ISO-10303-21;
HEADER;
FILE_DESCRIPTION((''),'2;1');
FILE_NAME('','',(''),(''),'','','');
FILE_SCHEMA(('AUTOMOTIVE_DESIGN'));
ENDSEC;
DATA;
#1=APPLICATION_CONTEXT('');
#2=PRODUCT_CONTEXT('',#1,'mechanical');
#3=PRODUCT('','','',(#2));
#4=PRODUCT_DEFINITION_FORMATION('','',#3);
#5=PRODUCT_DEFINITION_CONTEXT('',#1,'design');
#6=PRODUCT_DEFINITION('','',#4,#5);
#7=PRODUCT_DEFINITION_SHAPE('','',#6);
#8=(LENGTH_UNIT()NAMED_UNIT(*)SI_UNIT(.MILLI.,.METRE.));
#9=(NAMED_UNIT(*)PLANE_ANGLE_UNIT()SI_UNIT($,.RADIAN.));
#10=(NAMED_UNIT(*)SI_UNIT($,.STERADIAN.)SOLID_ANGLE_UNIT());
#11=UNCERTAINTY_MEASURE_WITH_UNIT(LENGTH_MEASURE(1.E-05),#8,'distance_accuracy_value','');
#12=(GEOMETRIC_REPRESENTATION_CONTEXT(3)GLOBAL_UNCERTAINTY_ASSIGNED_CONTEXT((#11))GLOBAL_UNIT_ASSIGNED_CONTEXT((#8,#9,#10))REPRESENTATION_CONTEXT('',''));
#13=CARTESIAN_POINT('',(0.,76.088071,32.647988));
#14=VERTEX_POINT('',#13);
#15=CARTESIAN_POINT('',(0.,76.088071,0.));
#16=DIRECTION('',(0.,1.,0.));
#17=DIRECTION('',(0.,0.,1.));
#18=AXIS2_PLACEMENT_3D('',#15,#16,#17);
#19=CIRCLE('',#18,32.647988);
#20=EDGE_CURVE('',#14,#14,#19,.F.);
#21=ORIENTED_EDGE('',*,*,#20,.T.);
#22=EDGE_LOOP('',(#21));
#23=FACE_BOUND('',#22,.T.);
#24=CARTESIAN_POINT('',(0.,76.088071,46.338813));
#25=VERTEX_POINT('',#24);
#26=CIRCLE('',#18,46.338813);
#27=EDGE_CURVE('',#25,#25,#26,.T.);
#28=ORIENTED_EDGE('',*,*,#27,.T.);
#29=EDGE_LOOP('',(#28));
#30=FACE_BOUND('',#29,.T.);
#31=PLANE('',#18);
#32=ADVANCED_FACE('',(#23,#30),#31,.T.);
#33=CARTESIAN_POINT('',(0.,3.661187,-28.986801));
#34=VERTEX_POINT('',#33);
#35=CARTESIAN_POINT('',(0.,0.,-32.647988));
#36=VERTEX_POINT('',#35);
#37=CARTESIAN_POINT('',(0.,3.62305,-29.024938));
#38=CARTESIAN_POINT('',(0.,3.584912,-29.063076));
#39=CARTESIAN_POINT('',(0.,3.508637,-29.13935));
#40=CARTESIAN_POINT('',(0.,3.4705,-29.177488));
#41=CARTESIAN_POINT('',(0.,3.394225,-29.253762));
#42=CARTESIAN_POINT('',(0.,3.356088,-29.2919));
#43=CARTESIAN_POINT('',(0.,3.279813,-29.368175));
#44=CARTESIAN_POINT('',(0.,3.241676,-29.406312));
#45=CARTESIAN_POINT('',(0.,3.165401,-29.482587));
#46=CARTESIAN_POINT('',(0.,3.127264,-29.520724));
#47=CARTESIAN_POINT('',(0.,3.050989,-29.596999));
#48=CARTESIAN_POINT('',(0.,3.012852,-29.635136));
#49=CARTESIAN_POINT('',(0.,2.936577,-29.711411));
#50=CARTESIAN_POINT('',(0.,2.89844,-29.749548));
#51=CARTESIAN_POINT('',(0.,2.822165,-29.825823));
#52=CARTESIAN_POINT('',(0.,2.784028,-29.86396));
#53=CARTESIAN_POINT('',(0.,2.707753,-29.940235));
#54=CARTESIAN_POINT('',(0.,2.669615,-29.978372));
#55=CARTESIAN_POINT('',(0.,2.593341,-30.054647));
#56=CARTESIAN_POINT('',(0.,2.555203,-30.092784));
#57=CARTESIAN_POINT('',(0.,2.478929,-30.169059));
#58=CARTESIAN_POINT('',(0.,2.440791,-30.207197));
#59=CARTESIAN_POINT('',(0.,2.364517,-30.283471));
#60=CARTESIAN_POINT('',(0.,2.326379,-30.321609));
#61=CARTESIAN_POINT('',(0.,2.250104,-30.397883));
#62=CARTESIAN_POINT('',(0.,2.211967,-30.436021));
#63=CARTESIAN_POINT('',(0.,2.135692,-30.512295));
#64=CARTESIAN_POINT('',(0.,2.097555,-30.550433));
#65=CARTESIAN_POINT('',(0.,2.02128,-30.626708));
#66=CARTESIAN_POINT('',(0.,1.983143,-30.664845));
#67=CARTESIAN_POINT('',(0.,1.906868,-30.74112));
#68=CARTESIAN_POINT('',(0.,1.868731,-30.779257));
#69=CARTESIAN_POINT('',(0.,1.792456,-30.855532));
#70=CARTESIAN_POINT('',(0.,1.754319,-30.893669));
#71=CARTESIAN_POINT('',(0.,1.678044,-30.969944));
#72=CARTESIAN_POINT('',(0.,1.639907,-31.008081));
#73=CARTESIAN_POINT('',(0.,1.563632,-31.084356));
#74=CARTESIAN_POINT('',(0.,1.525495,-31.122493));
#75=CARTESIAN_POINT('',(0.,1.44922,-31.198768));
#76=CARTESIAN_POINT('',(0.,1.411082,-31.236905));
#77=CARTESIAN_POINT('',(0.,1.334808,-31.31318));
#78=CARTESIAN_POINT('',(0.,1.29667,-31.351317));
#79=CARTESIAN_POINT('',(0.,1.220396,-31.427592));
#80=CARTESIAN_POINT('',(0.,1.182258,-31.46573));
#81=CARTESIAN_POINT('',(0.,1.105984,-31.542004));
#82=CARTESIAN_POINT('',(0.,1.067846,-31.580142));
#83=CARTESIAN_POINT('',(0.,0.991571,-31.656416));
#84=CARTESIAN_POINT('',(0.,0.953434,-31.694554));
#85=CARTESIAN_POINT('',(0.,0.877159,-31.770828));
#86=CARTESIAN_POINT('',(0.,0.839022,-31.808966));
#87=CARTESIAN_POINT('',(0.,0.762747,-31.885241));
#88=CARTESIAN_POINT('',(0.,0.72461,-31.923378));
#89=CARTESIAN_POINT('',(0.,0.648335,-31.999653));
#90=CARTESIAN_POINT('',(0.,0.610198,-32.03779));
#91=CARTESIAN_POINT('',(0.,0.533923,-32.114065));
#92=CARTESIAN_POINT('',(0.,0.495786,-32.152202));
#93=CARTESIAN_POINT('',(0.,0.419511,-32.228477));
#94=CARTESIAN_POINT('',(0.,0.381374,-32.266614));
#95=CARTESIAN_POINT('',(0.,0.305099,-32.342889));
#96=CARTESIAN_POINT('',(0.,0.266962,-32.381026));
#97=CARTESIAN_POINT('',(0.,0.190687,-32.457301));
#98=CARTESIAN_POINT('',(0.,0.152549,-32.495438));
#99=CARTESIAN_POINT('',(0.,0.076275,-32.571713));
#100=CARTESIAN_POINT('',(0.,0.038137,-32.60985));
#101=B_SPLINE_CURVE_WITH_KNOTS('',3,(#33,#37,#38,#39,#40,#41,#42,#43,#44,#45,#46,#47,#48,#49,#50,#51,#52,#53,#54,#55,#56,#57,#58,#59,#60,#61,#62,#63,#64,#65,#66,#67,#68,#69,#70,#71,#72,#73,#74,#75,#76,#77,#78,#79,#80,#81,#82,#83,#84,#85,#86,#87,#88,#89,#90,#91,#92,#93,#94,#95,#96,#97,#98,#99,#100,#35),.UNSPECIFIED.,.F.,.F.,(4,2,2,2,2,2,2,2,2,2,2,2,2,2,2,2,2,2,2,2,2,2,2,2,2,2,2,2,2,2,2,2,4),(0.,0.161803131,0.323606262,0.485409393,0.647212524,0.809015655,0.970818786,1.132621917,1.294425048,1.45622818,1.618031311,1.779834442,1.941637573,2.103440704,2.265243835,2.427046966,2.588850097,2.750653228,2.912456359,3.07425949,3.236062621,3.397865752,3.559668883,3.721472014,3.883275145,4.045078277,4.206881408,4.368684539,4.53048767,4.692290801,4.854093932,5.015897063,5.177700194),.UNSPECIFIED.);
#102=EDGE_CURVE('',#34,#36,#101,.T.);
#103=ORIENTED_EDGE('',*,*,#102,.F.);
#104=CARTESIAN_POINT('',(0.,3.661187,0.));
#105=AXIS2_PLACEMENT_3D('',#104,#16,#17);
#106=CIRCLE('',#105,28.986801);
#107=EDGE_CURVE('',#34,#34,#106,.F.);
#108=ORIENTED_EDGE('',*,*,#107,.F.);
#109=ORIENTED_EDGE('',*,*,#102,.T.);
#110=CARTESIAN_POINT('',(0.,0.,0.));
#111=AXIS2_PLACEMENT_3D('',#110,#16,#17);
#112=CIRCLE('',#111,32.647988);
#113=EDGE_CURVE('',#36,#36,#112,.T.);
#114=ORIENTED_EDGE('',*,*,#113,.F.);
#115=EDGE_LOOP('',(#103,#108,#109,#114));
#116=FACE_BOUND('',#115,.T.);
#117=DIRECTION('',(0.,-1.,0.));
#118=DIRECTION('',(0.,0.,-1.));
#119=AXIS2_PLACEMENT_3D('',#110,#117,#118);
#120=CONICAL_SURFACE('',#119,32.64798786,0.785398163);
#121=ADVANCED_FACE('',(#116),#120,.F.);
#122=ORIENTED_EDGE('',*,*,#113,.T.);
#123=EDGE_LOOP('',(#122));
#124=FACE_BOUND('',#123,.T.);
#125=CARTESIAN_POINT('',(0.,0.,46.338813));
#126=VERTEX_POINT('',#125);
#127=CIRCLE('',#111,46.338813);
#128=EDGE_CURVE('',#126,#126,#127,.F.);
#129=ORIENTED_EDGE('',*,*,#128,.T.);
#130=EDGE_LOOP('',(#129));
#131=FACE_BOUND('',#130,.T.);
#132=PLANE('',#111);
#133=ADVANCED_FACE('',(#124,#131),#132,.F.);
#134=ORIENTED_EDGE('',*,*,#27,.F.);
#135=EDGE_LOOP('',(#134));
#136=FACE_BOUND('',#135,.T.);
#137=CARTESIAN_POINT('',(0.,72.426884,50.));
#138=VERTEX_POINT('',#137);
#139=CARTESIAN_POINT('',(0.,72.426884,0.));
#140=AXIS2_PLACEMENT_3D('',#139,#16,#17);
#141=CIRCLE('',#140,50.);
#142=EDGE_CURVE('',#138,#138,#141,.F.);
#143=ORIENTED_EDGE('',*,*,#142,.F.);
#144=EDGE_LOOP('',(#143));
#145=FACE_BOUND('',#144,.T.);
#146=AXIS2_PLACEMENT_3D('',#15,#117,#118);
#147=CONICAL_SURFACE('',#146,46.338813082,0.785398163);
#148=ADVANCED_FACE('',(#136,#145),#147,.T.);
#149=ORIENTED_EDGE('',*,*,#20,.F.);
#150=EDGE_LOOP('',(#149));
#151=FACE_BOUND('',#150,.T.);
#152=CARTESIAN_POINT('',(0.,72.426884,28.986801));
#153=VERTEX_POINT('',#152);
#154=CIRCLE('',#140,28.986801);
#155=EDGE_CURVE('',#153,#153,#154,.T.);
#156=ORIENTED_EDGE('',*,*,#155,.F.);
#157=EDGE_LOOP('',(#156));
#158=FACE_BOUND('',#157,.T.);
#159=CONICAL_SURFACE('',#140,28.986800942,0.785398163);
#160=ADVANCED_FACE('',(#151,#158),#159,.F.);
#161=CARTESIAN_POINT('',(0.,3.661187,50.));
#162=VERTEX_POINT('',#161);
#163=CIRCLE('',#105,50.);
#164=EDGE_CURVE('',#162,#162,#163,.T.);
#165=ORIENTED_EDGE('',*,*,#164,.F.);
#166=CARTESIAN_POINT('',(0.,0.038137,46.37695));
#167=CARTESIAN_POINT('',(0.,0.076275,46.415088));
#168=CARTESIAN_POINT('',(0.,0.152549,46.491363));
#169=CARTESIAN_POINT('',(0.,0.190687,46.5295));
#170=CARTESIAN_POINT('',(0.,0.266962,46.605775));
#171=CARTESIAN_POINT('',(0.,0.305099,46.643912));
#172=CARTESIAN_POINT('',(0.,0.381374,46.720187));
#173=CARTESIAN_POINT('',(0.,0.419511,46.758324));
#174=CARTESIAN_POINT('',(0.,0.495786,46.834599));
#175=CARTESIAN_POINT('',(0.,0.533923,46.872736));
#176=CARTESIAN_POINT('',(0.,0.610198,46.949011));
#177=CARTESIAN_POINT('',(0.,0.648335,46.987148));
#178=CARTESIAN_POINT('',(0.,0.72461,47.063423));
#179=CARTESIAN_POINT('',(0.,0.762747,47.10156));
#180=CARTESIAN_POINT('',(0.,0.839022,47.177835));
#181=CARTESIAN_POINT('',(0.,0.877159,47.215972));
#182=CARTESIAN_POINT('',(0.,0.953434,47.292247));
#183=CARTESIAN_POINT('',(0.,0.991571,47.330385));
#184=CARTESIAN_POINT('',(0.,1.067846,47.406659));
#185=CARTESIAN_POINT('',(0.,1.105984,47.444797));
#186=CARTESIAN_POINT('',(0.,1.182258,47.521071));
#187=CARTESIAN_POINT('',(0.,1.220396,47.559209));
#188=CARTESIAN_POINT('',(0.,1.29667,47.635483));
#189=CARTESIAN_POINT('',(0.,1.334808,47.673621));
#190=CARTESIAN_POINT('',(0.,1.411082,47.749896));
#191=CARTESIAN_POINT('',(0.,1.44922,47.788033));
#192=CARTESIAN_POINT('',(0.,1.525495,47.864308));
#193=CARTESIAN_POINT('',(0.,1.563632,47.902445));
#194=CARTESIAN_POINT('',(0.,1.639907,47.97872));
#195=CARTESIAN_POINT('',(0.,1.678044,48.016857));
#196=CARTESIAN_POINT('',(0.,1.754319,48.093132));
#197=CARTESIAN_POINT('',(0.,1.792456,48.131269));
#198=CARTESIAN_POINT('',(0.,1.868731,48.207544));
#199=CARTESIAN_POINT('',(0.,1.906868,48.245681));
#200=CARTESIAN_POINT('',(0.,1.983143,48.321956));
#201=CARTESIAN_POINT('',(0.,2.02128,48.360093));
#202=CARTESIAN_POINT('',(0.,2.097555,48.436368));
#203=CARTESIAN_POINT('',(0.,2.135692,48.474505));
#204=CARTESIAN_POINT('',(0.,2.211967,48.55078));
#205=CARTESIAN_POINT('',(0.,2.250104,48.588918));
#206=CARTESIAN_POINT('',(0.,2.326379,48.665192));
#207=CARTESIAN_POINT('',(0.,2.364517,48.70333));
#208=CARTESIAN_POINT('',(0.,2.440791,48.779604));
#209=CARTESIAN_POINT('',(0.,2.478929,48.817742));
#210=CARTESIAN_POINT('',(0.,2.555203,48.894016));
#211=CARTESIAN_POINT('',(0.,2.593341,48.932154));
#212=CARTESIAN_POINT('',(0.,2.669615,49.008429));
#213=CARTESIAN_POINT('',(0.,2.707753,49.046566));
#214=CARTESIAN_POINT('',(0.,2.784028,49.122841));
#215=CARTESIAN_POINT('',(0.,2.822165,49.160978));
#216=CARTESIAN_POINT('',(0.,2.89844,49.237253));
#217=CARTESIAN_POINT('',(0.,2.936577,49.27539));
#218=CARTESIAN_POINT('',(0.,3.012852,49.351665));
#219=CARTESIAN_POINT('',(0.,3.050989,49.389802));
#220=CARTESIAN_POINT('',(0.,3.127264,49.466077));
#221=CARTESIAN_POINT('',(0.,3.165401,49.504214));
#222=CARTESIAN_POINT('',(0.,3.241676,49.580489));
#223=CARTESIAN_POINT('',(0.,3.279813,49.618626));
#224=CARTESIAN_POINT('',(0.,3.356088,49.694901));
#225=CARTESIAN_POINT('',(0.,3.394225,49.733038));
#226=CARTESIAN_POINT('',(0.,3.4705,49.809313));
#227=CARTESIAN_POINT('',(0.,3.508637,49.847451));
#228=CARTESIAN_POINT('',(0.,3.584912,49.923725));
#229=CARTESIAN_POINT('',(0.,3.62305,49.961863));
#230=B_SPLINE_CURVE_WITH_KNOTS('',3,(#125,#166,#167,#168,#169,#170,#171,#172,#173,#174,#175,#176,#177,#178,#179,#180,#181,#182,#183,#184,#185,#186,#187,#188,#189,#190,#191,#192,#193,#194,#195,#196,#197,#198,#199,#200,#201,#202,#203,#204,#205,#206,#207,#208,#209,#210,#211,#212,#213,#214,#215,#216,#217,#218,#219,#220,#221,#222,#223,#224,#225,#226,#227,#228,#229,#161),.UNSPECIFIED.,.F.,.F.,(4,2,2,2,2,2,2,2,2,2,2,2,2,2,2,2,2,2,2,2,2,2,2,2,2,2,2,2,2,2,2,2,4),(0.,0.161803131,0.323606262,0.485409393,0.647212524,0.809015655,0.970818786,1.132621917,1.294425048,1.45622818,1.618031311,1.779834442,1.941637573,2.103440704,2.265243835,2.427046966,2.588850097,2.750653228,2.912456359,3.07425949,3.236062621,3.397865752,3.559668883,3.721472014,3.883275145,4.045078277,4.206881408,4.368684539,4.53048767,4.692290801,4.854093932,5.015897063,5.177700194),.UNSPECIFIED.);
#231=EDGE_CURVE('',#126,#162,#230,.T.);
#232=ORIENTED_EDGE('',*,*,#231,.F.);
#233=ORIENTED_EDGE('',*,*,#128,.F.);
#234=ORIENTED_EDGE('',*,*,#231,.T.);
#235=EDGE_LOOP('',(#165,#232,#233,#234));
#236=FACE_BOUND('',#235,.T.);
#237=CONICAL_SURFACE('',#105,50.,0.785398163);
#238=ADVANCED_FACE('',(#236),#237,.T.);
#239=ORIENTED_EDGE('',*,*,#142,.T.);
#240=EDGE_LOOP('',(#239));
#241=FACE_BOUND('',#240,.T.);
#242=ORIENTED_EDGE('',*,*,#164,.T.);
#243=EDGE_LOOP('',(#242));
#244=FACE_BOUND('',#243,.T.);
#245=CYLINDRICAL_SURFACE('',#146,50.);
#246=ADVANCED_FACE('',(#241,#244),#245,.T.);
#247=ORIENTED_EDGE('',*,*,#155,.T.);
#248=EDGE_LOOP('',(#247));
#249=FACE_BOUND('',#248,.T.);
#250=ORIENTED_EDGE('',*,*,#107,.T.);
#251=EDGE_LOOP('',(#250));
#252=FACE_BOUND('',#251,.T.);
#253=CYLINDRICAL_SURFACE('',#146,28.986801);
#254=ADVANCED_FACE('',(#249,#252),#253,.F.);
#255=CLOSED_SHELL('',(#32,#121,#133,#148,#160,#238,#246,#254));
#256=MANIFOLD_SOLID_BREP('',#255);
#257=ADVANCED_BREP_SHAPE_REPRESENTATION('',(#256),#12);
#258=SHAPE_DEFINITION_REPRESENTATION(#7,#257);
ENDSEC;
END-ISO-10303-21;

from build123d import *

# Parameters (mm, degrees)
SKETCH1_R           = 50
BOSS_EXTRUDE1_DEPTH = 76.088071402
SKETCH2_R           = 28.986800942
CUT_EXTRUDE1_DEPTH  = 104.872010714
CHAMFER1_SIZE       = 3.661186918


with BuildPart() as part:
    # Sketch1 → Boss-Extrude1 (new body)
    with BuildSketch(Plane(origin=(0, 0, 0), x_dir=(1, 0, 0), z_dir=(0, 1, 0))):
        Circle(SKETCH1_R)
    extrude(amount=BOSS_EXTRUDE1_DEPTH)

    # Sketch2 → Cut-Extrude1 (cut, through all)
    with BuildSketch(Plane(origin=(0, 0, 0), x_dir=(1, 0, 0), z_dir=(0, 1, 0))):
        Circle(SKETCH2_R)
    extrude(amount=CUT_EXTRUDE1_DEPTH, mode=Mode.SUBTRACT)

    # Chamfer1
    chamfer1_edges = [part.edges().sort_by_distance(p)[0] for p in [
        (-28.986800942, 76.088071402, 0),
        (-28.986800942, 0, 0),
        (-50, 0, 0),
        (-50, 76.088071402, 0),
    ]]
    chamfer(chamfer1_edges, length=CHAMFER1_SIZE)


solid = part.part
